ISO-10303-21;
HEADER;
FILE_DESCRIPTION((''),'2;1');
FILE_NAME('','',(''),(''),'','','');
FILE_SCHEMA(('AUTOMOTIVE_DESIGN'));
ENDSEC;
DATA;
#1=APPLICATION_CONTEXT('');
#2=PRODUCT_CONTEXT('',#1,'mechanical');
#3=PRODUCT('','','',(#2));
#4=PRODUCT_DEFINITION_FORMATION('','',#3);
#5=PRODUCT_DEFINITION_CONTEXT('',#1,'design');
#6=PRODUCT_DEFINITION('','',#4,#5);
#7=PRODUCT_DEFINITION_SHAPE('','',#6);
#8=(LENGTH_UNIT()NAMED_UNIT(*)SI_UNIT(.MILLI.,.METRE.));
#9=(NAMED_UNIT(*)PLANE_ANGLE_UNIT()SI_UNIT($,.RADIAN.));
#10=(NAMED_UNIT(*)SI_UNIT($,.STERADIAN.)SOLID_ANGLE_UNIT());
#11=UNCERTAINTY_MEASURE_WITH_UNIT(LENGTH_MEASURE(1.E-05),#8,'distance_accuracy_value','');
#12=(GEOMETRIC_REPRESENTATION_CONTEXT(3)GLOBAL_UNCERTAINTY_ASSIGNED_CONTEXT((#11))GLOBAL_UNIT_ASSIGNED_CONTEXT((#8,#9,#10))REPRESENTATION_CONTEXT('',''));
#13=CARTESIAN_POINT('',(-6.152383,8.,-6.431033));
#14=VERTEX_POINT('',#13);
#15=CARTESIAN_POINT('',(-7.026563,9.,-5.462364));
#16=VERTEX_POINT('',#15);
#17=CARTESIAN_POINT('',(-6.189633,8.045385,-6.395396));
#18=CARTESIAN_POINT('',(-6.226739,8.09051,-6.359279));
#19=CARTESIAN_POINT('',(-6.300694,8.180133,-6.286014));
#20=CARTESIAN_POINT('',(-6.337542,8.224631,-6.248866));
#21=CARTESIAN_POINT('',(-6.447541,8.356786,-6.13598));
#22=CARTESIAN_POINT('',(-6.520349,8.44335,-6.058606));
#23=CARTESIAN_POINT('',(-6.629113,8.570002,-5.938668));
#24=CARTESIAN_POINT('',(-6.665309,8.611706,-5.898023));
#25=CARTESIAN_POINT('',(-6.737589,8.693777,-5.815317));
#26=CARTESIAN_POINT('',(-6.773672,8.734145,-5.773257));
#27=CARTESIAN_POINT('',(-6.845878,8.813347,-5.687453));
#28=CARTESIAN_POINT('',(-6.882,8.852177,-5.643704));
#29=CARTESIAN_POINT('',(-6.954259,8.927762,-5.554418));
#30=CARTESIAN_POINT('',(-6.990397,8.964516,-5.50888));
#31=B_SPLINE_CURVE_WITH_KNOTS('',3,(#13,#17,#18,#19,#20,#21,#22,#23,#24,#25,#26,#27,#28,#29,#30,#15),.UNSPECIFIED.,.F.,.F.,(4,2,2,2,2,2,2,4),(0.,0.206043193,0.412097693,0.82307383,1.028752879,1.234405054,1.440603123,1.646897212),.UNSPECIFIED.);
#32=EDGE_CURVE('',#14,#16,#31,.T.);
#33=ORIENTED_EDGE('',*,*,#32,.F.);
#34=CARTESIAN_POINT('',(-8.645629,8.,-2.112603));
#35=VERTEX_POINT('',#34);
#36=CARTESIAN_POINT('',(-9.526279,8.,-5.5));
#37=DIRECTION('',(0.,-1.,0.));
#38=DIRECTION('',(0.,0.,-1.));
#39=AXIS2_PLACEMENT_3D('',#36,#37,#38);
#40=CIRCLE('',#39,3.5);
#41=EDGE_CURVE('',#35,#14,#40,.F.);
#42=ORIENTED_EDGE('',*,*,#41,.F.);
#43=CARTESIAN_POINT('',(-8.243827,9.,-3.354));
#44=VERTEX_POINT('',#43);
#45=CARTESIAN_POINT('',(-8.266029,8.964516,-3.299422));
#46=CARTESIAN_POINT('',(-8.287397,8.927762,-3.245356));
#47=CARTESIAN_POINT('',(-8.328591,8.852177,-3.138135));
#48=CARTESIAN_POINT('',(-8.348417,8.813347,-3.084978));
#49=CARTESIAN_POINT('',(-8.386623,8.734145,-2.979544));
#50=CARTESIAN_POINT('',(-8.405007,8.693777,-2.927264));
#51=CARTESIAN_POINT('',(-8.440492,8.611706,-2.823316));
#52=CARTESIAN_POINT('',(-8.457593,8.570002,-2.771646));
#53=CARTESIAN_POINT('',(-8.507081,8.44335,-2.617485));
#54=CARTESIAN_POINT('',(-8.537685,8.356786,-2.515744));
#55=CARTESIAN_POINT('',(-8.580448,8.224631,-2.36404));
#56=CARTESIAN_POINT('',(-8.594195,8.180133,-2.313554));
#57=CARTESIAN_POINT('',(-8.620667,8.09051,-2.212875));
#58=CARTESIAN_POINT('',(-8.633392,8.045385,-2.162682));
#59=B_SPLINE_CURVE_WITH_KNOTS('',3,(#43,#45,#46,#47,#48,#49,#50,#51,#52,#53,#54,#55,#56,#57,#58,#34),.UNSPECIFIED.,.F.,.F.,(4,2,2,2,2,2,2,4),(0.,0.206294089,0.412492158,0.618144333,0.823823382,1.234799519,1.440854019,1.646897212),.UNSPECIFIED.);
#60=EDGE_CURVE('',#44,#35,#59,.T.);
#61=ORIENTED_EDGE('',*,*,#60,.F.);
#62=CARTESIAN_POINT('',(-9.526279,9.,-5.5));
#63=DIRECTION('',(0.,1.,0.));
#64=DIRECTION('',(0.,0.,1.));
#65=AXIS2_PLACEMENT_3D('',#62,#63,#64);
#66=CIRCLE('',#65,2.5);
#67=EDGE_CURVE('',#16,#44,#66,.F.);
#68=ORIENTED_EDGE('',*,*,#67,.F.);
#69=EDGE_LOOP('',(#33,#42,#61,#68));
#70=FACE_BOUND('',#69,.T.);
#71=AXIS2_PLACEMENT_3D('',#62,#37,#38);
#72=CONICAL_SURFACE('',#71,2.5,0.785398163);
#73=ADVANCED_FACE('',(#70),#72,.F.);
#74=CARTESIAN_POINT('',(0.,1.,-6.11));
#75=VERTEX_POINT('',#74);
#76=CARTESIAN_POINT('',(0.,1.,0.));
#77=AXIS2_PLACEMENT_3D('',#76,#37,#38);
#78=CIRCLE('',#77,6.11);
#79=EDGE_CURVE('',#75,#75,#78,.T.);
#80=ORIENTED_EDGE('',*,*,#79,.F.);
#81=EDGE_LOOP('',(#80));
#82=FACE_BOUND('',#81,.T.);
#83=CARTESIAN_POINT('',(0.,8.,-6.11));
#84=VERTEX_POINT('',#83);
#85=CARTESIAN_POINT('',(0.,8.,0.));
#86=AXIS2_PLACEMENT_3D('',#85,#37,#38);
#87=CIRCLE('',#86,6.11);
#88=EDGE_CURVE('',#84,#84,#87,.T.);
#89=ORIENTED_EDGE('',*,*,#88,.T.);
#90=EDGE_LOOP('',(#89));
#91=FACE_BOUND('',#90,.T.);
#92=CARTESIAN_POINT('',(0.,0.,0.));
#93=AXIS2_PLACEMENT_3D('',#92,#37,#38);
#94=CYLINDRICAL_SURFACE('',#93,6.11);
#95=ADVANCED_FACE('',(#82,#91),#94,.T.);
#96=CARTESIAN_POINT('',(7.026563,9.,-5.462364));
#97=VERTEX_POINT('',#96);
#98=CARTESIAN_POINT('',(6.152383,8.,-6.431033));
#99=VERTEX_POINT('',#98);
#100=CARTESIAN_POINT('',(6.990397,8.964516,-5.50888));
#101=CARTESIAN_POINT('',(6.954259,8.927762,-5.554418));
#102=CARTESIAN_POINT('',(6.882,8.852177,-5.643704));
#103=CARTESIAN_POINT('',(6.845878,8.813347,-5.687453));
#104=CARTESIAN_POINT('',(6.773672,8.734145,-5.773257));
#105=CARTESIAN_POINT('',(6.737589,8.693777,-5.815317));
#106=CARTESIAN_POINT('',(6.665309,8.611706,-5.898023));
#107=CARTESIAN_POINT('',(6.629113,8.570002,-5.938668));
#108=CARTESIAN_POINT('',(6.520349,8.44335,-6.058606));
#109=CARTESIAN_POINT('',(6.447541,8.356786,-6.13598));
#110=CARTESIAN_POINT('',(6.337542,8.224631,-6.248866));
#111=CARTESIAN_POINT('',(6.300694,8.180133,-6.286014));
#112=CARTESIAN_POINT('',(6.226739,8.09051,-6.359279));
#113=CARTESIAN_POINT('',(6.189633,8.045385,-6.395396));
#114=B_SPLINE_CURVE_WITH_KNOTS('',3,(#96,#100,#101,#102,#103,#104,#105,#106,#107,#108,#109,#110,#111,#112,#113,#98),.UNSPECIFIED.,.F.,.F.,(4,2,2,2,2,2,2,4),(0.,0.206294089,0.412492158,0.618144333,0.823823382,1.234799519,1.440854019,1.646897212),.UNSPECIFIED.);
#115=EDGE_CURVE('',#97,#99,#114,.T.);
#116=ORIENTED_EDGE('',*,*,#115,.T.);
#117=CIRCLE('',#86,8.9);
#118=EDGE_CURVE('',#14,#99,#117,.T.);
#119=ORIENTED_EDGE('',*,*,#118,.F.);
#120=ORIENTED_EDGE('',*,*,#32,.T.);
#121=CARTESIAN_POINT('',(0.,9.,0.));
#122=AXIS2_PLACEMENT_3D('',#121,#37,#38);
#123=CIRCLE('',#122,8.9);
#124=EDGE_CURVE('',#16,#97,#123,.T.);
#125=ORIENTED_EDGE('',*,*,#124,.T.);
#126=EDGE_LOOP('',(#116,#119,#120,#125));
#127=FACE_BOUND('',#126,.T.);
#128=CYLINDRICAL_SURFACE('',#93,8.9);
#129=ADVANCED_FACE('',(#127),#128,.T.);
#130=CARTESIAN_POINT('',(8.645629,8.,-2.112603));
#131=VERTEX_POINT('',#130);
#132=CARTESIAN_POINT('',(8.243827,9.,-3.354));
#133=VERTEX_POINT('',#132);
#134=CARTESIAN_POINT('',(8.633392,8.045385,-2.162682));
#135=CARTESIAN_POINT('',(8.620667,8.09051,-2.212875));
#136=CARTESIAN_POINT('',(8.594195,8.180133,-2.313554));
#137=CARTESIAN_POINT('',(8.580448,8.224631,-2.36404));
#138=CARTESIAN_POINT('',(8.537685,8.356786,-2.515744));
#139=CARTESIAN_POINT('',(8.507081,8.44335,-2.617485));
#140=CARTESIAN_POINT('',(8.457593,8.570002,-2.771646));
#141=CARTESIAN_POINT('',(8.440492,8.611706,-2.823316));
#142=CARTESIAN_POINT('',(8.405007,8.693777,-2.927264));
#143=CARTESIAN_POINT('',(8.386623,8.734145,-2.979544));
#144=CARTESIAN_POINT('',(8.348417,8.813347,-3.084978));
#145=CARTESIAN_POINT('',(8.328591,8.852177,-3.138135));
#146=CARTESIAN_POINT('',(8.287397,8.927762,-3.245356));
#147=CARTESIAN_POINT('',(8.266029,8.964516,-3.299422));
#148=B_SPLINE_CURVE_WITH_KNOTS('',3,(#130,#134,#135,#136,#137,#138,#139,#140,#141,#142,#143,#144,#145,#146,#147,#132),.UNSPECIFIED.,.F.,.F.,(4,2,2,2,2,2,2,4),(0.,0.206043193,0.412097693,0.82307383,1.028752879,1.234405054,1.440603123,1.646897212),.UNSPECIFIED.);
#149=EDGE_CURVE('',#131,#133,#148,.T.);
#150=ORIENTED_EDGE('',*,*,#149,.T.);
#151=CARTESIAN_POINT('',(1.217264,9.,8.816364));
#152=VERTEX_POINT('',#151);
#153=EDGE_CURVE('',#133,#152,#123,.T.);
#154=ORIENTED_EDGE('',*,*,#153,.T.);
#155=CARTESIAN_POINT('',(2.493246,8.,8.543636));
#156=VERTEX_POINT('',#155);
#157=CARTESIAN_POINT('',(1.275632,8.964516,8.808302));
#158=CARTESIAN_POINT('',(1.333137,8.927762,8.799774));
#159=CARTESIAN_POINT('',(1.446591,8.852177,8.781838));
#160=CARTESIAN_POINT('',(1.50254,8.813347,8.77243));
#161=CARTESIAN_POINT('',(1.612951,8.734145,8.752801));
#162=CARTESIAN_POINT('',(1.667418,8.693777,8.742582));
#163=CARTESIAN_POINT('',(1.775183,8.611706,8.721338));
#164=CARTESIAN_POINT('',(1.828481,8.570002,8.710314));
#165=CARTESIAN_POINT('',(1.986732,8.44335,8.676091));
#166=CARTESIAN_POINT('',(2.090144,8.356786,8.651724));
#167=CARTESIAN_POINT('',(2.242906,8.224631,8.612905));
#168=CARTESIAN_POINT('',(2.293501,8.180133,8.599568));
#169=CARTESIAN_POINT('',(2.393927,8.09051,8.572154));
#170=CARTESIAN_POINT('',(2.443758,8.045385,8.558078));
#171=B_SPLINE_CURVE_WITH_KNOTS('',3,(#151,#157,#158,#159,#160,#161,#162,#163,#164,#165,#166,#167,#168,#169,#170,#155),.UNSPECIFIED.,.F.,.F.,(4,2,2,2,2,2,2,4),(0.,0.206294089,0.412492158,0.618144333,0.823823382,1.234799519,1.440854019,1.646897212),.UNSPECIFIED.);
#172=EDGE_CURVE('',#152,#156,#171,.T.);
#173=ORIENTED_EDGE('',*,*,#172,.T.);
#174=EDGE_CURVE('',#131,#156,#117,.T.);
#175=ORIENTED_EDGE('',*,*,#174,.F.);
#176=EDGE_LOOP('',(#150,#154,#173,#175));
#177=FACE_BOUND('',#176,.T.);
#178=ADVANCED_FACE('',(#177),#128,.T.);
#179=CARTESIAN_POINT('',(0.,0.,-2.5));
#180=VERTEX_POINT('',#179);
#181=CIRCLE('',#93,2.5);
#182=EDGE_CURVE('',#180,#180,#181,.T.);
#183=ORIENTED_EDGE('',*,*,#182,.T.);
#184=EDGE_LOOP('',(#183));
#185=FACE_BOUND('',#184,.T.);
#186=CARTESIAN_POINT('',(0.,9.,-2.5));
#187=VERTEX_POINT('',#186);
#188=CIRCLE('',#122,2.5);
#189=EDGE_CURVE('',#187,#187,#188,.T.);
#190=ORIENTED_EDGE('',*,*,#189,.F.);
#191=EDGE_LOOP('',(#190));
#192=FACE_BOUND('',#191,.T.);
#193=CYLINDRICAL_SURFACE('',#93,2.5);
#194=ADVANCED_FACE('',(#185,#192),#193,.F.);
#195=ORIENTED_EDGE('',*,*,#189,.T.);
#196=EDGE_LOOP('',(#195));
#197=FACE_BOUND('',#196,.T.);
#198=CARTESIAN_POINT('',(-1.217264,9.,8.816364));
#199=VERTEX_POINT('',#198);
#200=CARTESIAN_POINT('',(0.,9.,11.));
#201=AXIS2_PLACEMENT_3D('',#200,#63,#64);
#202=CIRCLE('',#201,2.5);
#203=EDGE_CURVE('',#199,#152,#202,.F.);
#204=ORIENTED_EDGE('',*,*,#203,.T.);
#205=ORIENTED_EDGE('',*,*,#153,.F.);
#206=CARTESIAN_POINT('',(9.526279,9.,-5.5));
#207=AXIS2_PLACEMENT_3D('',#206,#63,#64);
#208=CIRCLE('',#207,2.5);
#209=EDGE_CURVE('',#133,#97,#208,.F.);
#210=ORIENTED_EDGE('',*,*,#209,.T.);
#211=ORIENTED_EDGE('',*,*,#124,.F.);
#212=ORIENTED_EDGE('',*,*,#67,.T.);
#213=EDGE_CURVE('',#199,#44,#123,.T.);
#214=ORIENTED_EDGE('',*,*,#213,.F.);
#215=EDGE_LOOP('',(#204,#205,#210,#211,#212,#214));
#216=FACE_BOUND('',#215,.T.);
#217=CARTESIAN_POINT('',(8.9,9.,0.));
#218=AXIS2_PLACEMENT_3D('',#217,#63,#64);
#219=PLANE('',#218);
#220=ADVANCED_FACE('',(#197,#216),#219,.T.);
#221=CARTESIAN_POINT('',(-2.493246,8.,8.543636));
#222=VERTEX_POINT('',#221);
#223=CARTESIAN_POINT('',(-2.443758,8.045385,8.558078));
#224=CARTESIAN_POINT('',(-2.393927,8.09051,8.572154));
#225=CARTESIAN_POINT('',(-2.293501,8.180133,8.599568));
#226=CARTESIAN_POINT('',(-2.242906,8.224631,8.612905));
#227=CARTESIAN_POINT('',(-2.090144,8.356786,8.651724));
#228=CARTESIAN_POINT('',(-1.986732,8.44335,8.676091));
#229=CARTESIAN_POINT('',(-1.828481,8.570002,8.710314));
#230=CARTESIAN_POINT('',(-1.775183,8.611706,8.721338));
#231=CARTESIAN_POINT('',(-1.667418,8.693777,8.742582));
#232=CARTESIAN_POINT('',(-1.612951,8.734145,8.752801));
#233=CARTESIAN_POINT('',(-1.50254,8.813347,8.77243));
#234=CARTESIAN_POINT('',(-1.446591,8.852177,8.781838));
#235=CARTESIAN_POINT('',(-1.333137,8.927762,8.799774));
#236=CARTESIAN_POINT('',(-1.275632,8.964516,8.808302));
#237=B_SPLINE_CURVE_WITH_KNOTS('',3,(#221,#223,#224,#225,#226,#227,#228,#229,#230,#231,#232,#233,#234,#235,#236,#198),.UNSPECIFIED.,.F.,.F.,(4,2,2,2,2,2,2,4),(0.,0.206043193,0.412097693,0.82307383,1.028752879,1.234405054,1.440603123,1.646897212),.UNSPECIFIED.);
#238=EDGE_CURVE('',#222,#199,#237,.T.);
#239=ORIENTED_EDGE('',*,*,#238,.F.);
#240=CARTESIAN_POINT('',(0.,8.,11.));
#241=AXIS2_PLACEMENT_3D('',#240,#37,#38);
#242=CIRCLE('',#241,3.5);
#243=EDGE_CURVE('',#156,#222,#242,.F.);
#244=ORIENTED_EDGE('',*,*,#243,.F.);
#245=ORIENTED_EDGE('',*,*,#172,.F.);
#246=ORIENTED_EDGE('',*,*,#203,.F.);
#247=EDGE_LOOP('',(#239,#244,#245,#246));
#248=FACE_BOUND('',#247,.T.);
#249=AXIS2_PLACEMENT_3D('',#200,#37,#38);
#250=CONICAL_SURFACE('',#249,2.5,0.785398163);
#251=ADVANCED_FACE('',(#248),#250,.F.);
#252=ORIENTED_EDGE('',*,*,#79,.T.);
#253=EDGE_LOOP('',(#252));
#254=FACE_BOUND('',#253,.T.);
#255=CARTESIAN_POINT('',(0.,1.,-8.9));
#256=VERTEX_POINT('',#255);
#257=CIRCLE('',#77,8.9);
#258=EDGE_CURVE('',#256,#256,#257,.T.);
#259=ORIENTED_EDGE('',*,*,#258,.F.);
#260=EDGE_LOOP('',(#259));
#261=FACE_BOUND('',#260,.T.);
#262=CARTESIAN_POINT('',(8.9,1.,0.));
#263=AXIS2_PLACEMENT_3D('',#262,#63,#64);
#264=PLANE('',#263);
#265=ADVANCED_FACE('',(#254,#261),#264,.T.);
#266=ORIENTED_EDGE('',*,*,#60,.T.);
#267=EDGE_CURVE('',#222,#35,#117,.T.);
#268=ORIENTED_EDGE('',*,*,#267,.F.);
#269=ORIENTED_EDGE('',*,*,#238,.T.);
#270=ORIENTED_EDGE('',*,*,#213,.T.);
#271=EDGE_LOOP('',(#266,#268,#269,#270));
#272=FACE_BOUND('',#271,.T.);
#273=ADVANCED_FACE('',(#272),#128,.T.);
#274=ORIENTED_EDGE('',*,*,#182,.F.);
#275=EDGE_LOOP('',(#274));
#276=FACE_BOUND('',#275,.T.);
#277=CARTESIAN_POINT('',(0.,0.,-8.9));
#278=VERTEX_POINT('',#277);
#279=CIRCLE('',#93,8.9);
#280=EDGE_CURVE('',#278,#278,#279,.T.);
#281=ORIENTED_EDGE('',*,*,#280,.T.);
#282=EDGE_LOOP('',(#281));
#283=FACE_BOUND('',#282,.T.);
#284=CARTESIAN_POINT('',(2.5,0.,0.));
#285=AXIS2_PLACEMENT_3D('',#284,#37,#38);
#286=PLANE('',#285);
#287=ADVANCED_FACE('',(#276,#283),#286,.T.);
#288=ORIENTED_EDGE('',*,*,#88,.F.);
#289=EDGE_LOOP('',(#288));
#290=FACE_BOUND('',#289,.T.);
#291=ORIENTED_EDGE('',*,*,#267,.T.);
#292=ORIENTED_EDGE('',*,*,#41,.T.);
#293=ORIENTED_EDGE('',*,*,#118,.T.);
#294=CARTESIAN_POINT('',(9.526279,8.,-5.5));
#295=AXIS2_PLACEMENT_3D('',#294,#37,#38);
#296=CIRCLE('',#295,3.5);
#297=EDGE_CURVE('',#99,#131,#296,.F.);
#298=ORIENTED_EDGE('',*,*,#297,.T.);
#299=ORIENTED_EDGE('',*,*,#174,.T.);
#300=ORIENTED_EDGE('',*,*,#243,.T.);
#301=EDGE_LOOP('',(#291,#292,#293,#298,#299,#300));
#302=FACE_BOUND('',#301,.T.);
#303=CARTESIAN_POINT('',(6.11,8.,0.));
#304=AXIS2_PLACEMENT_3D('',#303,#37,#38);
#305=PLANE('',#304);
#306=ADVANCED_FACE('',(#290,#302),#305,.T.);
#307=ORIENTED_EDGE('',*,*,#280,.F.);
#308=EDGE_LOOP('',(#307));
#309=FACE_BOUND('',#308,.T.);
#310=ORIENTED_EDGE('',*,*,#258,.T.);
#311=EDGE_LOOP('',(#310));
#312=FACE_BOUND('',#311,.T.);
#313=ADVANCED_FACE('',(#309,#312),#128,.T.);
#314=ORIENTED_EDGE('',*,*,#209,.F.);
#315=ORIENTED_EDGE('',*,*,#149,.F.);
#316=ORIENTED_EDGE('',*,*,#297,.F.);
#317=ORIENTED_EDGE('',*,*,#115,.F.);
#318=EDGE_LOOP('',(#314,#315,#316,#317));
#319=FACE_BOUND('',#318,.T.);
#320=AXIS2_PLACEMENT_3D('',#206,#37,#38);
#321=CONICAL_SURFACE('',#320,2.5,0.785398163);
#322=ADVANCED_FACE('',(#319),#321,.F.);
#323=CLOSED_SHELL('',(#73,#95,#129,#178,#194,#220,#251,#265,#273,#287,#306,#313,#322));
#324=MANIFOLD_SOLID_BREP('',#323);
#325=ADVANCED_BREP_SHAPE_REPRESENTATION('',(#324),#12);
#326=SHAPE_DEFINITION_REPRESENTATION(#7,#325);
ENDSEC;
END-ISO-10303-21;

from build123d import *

# Parameters (mm, degrees)
ENL_V_MAT_EXTRU_1_REACH = 16.914
ESQUISSE2_R             = 2.5
CHANFREIN1_SIZE         = 1


with BuildPart() as part:
    # Esquisse1 → Révolution1 (revolve)
    with BuildSketch(Plane.XY, mode=Mode.PRIVATE) as r_volution1_sk:
        Polygon((2.5, 0), (8.9, 0), (8.9, 1), (6.11, 1), (6.11, 8), (8.9, 8), (8.9, 9), (2.5, 9), align=None)
    revolve(r_volution1_sk.sketch.rotate(Axis((0, 0, 0), (0, 1, 0)), 90), axis=Axis((0, 0, 0), (0, 1, 0)))

    # Esquisse2 → Enlèv. mat.-Extru.1 (cut, up to next)
    with BuildSketch(Plane.XZ.offset(-8), mode=Mode.PRIVATE) as enl_v_mat_extru_1_sk1:
        with Locations((0, 11)):
            Circle(ESQUISSE2_R)
    enl_v_mat_extru_1_tool1 = extrude(enl_v_mat_extru_1_sk1.sketch, amount=-ENL_V_MAT_EXTRU_1_REACH, mode=Mode.PRIVATE) & part.part
    # Esquisse2 → Enlèv. mat.-Extru.1 (cut, up to next)
    with BuildSketch(Plane.XZ.offset(-8), mode=Mode.PRIVATE) as enl_v_mat_extru_1_sk2:
        with Locations((9.526279442, -5.5)):
            Circle(ESQUISSE2_R)
    enl_v_mat_extru_1_tool2 = extrude(enl_v_mat_extru_1_sk2.sketch, amount=-ENL_V_MAT_EXTRU_1_REACH, mode=Mode.PRIVATE) & part.part
    # Esquisse2 → Enlèv. mat.-Extru.1 (cut, up to next)
    with BuildSketch(Plane.XZ.offset(-8), mode=Mode.PRIVATE) as enl_v_mat_extru_1_sk3:
        with Locations((-9.526279442, -5.5)):
            Circle(ESQUISSE2_R)
    enl_v_mat_extru_1_tool3 = extrude(enl_v_mat_extru_1_sk3.sketch, amount=-ENL_V_MAT_EXTRU_1_REACH, mode=Mode.PRIVATE) & part.part
    add(enl_v_mat_extru_1_tool1.solids().sort_by_distance((0, 8, 11))[0], mode=Mode.SUBTRACT)
    add(enl_v_mat_extru_1_tool2.solids().sort_by_distance((9.526279, 8, -5.5))[0], mode=Mode.SUBTRACT)
    add(enl_v_mat_extru_1_tool3.solids().sort_by_distance((-9.526279, 8, -5.5))[0], mode=Mode.SUBTRACT)

    # Chanfrein1
    chanfrein1_edges = [part.edges().sort_by_distance(p)[0] for p in [
        (7.361215932, 8, -4.25),
        (0, 8, 8.5),
        (-7.361215932, 8, -4.25),
    ]]
    chamfer(chanfrein1_edges, length=CHANFREIN1_SIZE - 0.0001)  # a hair under: the kernel refuses the full size


solid = part.part
